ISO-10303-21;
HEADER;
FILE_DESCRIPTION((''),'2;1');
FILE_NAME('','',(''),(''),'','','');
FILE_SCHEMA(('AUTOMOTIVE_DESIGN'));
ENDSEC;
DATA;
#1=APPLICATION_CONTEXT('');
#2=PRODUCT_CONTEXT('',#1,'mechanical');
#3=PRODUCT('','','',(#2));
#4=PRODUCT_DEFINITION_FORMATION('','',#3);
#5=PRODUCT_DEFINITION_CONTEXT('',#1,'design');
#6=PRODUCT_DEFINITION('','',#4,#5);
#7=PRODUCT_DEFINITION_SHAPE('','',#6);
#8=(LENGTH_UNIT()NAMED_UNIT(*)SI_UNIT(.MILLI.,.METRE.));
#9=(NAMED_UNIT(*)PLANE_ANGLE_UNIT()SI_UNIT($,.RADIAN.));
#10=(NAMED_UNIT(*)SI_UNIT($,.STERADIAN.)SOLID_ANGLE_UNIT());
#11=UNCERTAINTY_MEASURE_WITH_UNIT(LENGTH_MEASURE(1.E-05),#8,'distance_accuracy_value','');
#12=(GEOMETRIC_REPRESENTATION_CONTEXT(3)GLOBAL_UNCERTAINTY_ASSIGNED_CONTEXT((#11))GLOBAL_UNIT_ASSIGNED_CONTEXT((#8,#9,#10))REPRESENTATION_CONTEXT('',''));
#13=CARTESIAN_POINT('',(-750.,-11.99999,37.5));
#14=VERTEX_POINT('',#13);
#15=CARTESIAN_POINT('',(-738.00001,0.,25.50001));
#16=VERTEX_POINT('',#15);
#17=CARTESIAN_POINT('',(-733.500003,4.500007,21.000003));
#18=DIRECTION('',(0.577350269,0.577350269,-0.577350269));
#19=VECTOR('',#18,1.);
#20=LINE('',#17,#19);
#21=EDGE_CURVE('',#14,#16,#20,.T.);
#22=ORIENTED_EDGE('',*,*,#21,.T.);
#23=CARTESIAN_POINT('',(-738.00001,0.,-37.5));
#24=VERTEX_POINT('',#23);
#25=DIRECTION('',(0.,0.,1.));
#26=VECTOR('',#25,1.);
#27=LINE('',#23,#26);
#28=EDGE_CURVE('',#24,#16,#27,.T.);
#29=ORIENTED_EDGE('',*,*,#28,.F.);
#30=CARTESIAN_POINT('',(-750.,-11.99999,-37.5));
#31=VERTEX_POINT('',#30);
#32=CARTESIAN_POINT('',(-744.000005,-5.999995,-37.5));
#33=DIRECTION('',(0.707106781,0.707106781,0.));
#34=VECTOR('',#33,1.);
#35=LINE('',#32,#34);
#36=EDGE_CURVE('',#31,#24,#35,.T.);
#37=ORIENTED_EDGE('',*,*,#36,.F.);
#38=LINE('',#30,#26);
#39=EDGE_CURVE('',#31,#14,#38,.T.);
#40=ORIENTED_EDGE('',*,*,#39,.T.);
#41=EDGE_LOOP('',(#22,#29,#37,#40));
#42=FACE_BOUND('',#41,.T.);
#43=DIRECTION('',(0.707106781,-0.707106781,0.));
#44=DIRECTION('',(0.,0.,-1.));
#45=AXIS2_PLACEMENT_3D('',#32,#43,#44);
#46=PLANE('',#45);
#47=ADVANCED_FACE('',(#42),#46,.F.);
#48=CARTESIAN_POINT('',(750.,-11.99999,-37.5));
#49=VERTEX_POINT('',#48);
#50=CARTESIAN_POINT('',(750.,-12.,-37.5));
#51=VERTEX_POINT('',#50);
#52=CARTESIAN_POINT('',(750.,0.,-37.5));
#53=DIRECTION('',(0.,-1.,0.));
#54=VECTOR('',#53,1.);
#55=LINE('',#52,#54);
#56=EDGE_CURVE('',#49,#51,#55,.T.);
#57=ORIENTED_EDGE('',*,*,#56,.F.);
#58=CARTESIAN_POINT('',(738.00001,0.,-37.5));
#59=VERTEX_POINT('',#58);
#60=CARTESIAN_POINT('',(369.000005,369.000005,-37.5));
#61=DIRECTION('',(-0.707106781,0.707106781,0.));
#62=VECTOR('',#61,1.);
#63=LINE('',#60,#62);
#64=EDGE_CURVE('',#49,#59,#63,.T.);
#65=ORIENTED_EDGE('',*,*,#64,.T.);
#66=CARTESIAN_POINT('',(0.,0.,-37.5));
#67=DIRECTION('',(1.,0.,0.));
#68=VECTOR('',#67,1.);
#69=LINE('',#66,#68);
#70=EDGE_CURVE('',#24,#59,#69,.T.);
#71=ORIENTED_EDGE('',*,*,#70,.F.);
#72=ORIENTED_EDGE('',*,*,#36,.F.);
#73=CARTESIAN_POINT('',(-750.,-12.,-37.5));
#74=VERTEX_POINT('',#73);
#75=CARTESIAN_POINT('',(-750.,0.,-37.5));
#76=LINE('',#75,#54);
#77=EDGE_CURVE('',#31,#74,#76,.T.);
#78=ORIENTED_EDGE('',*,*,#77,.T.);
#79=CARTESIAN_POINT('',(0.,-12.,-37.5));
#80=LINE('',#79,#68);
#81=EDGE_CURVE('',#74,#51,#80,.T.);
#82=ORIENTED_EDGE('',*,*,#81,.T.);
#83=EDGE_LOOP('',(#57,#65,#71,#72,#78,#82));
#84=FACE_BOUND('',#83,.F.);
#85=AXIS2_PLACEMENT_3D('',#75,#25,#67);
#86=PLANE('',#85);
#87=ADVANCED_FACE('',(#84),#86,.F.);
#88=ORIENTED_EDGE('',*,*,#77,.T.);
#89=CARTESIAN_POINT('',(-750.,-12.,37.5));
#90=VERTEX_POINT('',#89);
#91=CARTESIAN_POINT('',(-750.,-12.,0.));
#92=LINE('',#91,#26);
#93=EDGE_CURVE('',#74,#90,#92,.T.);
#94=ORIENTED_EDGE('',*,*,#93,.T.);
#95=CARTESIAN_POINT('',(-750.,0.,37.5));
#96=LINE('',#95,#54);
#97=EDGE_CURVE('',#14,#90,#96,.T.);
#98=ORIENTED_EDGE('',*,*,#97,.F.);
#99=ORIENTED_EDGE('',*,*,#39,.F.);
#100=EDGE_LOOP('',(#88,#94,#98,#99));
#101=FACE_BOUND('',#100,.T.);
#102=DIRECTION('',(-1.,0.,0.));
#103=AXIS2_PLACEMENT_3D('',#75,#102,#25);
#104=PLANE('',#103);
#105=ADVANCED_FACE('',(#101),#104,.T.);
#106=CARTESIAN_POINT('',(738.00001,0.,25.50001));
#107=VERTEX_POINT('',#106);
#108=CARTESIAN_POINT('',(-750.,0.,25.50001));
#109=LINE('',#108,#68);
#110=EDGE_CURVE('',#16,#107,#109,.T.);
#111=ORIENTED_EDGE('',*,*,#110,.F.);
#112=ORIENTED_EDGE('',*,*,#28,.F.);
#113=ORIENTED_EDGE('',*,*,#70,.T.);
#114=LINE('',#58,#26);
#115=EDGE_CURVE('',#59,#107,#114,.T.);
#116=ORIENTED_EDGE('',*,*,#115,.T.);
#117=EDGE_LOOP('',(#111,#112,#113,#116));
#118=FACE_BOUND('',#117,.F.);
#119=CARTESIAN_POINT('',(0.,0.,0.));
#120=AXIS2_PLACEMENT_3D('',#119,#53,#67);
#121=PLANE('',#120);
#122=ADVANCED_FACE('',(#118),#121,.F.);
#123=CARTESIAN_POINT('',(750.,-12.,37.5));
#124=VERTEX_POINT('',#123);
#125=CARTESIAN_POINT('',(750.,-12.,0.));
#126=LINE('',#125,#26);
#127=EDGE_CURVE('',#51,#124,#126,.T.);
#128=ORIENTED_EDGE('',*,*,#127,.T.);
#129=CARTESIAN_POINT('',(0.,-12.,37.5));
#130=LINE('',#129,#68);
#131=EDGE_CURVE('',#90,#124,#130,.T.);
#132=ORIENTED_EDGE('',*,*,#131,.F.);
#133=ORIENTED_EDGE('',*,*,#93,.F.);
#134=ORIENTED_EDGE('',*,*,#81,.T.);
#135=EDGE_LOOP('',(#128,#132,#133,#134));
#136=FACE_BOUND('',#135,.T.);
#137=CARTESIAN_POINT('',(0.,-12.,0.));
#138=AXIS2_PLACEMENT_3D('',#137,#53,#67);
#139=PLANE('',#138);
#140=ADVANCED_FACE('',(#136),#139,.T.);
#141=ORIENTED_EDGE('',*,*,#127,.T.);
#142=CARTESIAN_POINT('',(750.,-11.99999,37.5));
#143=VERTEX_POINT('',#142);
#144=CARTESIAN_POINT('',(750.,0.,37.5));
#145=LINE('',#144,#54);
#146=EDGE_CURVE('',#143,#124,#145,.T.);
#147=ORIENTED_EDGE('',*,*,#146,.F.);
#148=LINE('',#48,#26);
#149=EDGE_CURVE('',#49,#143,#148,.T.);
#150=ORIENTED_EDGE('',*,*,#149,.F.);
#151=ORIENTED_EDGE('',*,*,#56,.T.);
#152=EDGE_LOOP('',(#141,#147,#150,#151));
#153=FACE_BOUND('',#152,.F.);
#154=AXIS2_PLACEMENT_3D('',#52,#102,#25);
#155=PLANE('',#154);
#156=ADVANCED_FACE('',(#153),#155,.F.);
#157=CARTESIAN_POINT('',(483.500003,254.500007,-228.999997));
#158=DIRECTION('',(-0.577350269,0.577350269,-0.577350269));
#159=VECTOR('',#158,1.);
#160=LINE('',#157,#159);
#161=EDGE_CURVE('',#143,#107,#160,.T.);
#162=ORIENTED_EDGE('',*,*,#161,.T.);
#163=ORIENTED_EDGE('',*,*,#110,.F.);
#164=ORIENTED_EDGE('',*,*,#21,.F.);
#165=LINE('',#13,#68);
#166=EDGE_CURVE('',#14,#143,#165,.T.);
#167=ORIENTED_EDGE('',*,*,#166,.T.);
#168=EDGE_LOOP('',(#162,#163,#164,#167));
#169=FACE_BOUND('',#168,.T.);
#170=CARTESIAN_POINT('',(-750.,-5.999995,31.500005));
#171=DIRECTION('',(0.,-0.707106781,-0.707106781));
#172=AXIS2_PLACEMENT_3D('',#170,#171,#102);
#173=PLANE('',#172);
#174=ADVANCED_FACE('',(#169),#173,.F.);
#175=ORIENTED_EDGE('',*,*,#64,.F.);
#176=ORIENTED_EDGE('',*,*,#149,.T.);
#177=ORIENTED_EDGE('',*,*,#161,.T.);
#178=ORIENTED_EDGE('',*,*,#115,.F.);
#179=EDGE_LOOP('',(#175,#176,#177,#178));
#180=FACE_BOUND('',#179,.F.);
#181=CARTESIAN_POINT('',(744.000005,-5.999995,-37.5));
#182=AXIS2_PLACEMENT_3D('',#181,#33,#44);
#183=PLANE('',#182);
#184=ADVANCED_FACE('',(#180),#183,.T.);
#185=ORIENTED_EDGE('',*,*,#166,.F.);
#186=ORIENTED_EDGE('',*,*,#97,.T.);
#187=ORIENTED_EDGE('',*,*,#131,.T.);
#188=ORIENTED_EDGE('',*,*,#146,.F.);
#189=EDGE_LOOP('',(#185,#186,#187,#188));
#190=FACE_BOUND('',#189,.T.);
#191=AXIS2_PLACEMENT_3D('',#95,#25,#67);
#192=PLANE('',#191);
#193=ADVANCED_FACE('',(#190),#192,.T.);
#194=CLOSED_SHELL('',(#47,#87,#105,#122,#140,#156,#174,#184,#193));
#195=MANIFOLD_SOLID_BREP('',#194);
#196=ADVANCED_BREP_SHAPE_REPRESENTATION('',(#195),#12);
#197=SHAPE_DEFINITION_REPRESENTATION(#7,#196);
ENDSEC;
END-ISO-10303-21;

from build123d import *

# Parameters (mm, degrees)
F0_W     = 1500
F0_H     = 75
F1_DEPTH = 12
F2_SIZE  = 11.99999


# Not quite as in the source:
# - a fillet or chamfer is up to 0.001 mm smaller than in the source, because OpenCascade refuses the exact size


with BuildPart() as f1:
    # F0 (on Front) → F1 (new body)
    with BuildSketch(Plane.XZ):
        Rectangle(F0_W, F0_H)
    extrude(amount=F1_DEPTH)

    # F2 (size 12 in the source; OpenCascade refuses exactly that, so slightly less here)
    f2_edges = [f1.edges().sort_by_distance(p)[0] for p in [
        (0, 0, 37.5),
        (750, 0, 0),
        (-750, 0, 0),
    ]]
    chamfer(f2_edges, length=F2_SIZE)


solid = f1.part
